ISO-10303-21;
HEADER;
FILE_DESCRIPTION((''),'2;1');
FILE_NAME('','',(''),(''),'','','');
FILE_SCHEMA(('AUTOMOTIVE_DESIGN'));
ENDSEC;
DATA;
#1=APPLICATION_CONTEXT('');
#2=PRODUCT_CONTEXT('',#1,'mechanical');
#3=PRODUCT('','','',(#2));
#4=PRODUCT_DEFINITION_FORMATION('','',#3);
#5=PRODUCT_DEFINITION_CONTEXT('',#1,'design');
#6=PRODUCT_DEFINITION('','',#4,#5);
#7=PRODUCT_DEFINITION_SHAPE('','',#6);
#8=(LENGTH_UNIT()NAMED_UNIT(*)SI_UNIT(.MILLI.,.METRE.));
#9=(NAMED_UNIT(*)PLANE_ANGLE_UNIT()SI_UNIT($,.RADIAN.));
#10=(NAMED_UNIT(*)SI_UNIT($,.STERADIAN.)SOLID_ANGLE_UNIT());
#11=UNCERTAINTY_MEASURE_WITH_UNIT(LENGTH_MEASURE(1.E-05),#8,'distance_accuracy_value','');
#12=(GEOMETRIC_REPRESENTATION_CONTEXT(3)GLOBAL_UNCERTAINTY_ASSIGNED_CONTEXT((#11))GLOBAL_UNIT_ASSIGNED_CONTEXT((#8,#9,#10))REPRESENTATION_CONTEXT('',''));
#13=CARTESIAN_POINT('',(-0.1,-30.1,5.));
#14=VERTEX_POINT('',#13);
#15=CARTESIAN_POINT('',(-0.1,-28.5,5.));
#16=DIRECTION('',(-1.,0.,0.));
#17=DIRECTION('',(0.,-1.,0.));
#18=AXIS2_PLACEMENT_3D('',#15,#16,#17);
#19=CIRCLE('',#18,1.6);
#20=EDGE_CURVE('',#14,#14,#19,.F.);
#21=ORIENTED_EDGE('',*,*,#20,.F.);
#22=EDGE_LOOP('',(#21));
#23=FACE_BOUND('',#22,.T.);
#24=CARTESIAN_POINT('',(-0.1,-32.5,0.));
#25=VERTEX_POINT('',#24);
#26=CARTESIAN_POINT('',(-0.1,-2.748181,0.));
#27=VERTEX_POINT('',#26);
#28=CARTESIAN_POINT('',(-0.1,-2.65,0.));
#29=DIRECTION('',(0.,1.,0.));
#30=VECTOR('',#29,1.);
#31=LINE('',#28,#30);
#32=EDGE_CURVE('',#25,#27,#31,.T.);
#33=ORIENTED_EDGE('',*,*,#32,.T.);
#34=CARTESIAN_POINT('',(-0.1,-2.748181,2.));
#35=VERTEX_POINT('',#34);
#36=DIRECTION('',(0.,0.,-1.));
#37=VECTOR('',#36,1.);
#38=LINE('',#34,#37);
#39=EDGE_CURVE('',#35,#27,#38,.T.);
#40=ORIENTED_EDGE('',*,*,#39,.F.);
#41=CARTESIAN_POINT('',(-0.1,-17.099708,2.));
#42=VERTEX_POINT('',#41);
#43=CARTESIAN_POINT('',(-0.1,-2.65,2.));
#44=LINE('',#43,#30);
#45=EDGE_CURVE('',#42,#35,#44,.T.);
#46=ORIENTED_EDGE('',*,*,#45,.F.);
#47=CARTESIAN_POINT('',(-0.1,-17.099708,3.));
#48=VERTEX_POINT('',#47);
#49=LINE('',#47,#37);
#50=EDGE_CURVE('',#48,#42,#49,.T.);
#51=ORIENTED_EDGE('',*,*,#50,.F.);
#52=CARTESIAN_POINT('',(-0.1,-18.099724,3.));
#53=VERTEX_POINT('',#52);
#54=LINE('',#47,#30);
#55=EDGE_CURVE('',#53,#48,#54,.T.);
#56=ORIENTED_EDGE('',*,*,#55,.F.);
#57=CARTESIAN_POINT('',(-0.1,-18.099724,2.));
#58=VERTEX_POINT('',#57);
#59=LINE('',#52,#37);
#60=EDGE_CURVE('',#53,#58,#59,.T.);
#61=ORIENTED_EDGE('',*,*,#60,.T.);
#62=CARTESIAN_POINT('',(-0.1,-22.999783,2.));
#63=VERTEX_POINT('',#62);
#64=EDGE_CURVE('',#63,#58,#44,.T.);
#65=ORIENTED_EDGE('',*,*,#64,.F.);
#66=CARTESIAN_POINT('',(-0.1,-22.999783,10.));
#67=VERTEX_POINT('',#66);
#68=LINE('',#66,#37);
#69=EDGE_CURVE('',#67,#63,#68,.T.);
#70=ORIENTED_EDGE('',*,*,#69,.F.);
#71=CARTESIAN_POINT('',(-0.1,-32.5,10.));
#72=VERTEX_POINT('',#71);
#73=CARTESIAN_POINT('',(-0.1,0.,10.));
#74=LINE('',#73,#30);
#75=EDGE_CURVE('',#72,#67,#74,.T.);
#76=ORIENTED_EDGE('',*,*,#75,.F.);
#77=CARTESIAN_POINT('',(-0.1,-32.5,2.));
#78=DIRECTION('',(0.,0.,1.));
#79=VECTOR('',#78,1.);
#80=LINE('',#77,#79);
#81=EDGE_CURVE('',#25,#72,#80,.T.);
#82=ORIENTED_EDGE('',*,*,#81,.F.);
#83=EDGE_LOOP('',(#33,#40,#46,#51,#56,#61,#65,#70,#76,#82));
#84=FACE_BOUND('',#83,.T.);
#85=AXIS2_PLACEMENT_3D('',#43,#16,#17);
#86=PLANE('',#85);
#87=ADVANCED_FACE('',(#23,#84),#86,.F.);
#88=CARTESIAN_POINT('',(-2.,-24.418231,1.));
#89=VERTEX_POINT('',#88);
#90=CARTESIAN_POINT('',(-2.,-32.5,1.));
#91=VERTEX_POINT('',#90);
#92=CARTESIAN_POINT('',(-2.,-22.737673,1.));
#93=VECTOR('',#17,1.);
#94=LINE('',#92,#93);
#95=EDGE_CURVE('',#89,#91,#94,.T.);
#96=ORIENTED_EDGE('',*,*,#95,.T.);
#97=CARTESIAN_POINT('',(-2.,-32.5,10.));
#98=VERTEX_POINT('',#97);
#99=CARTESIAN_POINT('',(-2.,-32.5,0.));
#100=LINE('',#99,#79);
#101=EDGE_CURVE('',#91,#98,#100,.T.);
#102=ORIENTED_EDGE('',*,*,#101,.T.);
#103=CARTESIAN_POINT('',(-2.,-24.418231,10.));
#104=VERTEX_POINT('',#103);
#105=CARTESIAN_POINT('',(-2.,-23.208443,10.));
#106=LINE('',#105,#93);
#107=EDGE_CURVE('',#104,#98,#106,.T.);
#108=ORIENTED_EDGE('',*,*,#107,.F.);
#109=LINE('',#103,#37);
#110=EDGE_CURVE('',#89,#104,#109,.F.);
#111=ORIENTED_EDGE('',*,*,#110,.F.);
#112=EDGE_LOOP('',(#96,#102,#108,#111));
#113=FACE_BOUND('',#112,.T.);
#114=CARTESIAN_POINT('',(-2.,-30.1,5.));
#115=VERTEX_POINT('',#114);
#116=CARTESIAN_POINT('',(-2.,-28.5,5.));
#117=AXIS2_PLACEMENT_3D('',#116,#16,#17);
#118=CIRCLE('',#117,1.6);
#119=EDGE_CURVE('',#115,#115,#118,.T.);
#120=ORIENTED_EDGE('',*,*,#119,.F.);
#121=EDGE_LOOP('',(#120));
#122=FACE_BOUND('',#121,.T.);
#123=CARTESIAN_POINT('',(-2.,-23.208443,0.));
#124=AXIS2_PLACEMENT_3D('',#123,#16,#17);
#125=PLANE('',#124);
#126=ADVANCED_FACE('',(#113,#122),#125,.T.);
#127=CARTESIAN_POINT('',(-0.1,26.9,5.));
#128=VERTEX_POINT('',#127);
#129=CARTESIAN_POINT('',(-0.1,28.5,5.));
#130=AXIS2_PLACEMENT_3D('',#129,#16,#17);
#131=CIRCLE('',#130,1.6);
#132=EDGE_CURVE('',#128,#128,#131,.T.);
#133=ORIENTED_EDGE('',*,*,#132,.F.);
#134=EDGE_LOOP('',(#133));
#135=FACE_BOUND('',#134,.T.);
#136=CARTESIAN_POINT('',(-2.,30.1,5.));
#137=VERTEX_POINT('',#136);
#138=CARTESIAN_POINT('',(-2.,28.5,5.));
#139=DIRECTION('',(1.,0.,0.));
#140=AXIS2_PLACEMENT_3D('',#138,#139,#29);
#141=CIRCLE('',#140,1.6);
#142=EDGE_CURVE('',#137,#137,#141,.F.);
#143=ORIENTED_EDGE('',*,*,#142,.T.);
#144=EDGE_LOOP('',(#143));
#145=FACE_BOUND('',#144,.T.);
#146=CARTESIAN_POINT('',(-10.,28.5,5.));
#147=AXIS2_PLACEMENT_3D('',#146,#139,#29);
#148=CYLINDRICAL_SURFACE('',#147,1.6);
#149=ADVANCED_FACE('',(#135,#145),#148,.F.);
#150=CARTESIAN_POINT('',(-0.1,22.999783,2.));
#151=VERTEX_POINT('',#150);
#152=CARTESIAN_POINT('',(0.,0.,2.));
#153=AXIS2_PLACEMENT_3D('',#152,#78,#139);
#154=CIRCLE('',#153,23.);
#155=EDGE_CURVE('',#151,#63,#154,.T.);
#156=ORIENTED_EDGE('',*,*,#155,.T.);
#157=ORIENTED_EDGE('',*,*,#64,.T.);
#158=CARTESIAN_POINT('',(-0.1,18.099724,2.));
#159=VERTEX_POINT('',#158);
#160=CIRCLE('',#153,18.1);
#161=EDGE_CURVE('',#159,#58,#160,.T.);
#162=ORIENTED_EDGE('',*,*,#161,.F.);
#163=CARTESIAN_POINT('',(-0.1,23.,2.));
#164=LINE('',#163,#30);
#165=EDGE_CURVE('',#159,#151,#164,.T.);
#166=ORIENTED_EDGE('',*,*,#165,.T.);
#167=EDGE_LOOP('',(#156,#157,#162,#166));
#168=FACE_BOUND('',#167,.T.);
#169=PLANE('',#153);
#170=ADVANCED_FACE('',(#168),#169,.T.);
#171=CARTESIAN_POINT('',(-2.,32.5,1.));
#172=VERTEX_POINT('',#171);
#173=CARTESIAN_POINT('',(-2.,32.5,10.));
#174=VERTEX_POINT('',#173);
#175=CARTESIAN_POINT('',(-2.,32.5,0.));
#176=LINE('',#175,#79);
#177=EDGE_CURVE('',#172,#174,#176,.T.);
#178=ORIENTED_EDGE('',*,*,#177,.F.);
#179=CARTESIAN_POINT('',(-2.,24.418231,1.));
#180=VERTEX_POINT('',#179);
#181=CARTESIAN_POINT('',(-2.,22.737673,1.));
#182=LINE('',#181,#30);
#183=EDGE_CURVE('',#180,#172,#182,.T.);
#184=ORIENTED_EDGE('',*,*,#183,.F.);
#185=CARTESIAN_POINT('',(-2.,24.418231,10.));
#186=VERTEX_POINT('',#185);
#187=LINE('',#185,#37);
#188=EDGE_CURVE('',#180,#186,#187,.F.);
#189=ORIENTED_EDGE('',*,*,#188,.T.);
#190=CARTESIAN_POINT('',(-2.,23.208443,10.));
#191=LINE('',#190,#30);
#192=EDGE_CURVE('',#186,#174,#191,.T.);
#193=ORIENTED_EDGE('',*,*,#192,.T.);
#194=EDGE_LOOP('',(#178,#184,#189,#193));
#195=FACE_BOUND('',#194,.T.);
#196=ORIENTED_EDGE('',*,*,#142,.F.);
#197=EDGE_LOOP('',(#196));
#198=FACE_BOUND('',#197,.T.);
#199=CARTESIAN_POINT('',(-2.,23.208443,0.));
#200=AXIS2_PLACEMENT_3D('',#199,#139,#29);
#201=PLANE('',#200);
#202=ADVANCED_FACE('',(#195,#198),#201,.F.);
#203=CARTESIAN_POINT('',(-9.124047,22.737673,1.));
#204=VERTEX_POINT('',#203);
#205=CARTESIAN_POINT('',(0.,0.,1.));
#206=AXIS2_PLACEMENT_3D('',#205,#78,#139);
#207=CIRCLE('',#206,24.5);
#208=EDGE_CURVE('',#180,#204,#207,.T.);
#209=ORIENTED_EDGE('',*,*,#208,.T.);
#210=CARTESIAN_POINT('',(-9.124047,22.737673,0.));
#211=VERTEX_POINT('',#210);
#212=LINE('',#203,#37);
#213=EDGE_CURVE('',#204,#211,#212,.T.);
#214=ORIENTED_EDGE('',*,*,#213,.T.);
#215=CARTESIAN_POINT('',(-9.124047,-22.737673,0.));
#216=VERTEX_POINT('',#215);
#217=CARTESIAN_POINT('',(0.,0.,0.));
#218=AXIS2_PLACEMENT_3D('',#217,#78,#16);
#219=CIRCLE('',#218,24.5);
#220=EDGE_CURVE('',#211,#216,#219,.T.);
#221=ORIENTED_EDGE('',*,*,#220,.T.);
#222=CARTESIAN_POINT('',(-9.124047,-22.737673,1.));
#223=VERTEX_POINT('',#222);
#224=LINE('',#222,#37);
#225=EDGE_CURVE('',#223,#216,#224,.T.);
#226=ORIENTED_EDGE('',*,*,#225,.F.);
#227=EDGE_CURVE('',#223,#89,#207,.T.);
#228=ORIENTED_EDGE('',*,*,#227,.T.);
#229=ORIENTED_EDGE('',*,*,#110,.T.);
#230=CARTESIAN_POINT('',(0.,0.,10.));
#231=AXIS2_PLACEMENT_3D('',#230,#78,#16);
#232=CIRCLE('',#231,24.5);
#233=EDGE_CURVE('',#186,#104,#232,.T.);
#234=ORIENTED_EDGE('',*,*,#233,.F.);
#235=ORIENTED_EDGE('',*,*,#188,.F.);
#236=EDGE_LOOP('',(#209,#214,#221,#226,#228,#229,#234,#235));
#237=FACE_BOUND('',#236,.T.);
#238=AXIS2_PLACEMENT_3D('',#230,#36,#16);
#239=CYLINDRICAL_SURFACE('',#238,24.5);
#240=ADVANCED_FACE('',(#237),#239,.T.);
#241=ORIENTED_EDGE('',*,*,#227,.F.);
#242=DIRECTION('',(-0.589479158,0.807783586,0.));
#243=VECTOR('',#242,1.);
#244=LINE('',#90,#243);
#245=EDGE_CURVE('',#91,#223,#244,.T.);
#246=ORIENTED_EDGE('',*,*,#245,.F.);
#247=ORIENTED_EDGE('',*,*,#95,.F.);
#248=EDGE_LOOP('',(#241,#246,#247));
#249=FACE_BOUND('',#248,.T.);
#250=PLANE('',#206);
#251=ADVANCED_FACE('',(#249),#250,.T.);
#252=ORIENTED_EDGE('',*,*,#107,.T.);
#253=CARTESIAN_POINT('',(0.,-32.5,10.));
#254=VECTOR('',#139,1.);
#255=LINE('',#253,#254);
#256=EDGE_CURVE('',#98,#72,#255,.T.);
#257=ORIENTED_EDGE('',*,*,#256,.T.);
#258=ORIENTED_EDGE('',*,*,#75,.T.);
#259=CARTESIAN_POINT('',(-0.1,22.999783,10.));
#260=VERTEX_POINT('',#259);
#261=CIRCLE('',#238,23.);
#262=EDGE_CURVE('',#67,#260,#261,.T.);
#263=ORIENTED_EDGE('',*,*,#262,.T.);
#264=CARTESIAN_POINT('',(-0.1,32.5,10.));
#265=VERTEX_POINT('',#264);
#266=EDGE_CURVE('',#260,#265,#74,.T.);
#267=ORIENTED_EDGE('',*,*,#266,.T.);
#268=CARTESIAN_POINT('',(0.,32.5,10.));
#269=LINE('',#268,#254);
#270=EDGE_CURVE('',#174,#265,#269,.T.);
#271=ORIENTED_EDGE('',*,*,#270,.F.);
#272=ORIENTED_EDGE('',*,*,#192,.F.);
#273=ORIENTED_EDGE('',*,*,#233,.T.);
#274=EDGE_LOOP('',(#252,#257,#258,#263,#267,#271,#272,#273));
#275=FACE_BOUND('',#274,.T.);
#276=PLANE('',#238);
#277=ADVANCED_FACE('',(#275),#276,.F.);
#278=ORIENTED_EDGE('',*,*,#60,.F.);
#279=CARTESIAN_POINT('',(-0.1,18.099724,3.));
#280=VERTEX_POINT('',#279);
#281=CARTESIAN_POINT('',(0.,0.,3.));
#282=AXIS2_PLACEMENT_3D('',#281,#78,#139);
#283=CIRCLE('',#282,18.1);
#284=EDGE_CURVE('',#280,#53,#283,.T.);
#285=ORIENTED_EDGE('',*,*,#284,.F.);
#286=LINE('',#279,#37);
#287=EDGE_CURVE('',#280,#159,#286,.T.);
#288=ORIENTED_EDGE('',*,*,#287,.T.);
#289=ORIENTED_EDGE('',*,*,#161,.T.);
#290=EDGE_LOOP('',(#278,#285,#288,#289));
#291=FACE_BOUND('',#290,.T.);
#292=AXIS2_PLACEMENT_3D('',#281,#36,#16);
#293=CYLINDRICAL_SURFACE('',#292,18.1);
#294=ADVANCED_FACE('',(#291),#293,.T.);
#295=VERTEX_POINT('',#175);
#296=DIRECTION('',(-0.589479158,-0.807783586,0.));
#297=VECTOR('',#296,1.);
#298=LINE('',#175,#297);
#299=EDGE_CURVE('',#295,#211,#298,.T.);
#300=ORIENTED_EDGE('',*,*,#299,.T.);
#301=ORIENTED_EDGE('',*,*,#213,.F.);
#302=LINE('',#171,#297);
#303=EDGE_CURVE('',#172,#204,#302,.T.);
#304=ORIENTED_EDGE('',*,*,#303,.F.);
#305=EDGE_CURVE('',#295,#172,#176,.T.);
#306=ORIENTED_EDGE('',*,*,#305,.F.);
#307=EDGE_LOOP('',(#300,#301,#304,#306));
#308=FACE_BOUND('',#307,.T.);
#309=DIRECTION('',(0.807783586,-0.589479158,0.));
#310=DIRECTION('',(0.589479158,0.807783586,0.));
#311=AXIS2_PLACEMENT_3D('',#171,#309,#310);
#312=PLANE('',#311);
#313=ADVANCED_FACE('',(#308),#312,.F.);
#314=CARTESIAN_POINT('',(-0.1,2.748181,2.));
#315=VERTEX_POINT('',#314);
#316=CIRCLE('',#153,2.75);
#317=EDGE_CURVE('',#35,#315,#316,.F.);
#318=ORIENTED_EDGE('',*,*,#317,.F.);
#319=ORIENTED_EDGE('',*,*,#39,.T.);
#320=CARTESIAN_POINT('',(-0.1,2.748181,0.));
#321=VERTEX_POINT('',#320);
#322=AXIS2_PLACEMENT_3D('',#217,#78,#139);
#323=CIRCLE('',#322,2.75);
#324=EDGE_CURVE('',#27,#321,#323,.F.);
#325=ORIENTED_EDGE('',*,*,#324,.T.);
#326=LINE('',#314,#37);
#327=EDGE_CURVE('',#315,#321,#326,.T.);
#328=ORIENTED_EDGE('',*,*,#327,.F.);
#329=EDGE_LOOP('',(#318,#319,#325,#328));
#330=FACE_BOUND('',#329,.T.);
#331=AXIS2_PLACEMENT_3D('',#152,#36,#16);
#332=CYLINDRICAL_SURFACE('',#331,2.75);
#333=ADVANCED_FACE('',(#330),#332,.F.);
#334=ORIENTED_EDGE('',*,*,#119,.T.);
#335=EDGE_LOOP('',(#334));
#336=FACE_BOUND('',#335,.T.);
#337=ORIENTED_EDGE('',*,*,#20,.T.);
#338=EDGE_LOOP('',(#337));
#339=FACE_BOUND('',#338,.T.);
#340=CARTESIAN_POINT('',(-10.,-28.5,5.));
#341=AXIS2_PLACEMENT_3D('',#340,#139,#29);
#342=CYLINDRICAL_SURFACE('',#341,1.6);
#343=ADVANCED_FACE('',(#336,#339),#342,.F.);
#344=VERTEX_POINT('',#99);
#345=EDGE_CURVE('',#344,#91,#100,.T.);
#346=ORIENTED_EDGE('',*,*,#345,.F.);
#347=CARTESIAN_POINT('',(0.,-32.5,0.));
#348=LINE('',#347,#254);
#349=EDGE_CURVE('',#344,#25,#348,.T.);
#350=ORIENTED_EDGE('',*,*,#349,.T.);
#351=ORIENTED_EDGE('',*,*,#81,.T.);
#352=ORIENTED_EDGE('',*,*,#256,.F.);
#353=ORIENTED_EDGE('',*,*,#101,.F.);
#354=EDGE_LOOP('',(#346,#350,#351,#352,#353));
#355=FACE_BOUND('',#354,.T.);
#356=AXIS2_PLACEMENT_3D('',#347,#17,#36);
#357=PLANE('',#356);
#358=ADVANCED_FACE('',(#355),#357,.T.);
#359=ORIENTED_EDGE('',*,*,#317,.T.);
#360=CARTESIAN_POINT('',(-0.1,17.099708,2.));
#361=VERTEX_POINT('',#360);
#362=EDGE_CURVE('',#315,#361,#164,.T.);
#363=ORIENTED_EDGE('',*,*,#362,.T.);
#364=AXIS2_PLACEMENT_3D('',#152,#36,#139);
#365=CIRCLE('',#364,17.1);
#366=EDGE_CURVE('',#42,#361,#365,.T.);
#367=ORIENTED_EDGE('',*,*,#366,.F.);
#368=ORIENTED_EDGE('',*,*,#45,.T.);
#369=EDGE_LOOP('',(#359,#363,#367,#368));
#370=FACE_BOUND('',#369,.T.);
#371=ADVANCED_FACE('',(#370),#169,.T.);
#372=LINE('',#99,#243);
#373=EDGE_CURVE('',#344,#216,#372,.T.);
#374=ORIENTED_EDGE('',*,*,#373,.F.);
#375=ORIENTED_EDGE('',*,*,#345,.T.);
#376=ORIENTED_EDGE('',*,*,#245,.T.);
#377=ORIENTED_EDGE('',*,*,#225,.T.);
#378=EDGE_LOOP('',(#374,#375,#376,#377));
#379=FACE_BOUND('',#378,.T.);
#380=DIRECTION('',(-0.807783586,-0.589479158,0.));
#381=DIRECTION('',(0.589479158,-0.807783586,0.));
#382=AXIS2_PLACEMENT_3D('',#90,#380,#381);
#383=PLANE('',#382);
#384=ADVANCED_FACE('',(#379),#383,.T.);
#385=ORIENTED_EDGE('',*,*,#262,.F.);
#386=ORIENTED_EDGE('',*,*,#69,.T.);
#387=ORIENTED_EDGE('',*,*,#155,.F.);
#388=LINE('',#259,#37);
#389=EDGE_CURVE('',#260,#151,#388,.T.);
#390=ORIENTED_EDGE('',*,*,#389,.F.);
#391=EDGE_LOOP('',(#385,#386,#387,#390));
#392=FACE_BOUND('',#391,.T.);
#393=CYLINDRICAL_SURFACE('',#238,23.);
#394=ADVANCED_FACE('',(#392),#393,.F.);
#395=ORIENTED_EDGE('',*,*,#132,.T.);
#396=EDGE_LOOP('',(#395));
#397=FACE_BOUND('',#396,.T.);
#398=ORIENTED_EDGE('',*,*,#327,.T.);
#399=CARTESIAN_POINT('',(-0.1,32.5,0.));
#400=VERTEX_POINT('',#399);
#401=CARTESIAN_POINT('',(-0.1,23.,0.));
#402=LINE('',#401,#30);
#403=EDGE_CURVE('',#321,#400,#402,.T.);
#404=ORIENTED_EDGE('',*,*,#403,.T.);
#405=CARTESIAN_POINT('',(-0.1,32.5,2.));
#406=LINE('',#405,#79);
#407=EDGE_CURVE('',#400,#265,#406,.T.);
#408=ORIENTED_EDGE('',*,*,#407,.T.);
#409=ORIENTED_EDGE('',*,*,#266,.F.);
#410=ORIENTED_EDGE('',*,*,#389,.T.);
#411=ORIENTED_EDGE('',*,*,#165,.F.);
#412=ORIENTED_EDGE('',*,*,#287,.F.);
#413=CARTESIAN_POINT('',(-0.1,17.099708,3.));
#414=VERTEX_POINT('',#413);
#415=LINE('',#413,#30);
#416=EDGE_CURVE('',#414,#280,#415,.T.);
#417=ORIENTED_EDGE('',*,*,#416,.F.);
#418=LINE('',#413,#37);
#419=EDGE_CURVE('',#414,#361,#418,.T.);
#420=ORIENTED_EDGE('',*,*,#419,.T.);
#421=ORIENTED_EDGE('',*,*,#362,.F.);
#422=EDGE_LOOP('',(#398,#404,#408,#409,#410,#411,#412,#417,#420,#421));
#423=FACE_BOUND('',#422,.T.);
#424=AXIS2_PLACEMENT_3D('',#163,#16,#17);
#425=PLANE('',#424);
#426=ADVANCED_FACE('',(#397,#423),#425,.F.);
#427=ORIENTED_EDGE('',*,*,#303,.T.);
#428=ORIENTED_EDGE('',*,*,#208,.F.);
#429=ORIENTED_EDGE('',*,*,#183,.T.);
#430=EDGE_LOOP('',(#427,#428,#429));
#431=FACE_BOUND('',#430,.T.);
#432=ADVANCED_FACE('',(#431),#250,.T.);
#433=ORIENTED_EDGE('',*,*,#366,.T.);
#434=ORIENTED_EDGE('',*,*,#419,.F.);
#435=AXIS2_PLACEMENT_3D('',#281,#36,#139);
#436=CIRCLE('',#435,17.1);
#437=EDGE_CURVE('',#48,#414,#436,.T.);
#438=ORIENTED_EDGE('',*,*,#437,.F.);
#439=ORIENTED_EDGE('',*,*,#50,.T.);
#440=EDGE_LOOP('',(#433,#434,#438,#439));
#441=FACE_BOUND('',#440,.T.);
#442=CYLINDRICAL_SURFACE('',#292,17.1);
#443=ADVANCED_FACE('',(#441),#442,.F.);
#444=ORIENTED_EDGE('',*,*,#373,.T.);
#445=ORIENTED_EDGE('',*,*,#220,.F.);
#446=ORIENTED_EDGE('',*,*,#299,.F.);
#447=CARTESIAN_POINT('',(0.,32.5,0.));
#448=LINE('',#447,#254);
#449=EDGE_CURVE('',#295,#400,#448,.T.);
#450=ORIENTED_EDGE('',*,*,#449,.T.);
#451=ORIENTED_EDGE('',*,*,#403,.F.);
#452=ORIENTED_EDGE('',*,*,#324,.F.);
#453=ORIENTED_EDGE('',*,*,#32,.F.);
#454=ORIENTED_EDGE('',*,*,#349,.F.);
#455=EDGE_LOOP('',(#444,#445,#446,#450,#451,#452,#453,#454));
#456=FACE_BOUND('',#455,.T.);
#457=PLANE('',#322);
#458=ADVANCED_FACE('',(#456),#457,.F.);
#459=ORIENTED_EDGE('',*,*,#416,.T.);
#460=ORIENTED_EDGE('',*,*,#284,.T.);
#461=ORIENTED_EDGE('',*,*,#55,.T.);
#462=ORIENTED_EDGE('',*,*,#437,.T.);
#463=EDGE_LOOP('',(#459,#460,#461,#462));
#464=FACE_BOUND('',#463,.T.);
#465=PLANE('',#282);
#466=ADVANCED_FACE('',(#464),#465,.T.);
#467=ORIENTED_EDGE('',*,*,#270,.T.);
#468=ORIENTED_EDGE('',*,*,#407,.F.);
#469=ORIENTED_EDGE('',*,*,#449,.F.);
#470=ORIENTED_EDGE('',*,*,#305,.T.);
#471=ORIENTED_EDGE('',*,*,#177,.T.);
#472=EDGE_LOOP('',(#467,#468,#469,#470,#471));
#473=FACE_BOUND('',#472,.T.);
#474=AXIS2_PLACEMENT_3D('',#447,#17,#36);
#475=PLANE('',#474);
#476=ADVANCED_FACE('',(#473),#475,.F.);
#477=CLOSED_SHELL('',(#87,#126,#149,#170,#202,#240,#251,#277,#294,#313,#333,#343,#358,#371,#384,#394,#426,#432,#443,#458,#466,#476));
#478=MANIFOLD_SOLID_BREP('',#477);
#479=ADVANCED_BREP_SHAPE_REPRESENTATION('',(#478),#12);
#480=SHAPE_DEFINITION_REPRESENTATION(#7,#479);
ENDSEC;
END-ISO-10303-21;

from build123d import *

# Parameters (mm, degrees)
BOSS_EXTRUDE1_DEPTH = 2
BOSS_EXTRUDE2_DEPTH = 10
BOSS_EXTRUDE3_DEPTH = 10
SKETCH3_R           = 1.6
CUT_EXTRUDE1_DEPTH  = 10
BOSS_EXTRUDE4_DEPTH = 1
MOVE_FACE1_DEPTH    = 10
BOSS_EXTRUDE5_DEPTH = 1


# Read off the part's stored shape, not the designer's step: Move Face1
with BuildPart() as part:
    # Sketch1 → Boss-Extrude1 (new body)
    with BuildSketch(Plane.XY):
        with BuildLine():
            Line((0, 23), (0, 2.65))
            ThreePointArc((0, 2.65), (-2.65, 0), (0, -2.65))
            Line((0, -2.65), (0, -23))
            ThreePointArc((0, -23), (-23, 0), (0, 23))
        make_face()
    extrude(amount=BOSS_EXTRUDE1_DEPTH)

    # Sketch2 → Boss-Extrude2 (add)
    with BuildSketch(Plane.XY):
        with BuildLine():
            Line((0, 23), (0, 24.5))
            ThreePointArc((0, 24.5), (-24.5, 0), (0, -24.5))
            Line((0, -24.5), (0, -23))
            ThreePointArc((0, -23), (-23, 0), (0, 23))
        make_face()
    extrude(amount=BOSS_EXTRUDE2_DEPTH)

    # Sketch4 → Boss-Extrude3 (add)
    with BuildSketch(Plane.XY.offset(10)):
        Polygon((0, -24.5), (-0.271688165, -23.208442848), (-2, -23.208442848), (-2, -32.5), (0, -32.5), align=None)
    boss_extrude3 = extrude(amount=-BOSS_EXTRUDE3_DEPTH)

    # Sketch3 → Cut-Extrude1 (cut)
    with BuildSketch(Plane(origin=(0, 0, 0), x_dir=(0, 0, -1), z_dir=(1, 0, 0))):
        with Locations(Location((-5, -28.5, 0), (0, 0, 90))):
            Circle(SKETCH3_R)
    cut_extrude1 = extrude(amount=-CUT_EXTRUDE1_DEPTH, mode=Mode.SUBTRACT)

    # Sketch5 → Boss-Extrude4 (add)
    with BuildSketch(Plane(origin=(0, 0, 0), x_dir=(-1, 0, 0), z_dir=(0, 0, -1))):
        Polygon((2, -32.5), (9.124047282, -22.73767273), (2, -22.73767273), align=None)
    boss_extrude4 = extrude(amount=-BOSS_EXTRUDE4_DEPTH)

    # Mirror1: Boss-Extrude3, Cut-Extrude1, Boss-Extrude4 across plane
    add(boss_extrude3.mirror(Plane.ZX))
    add(cut_extrude1.mirror(Plane.ZX), mode=Mode.SUBTRACT)
    add(boss_extrude4.mirror(Plane.ZX))

    # Move Face1 outline → Move Face1 (cut)
    with BuildSketch(Plane.XY):
        with BuildLine():
            ThreePointArc((-0.1, 2.748181217), (-2.75, 0), (-0.1, -2.748181217))
            Line((-0.1, -2.748181217), (-0.1, -32.5))
            Line((-0.1, -32.5), (0, -32.5))
            Line((0, -32.5), (0, -2.65))
            ThreePointArc((0, -2.65), (-2.65, 0), (0, 2.65))
            Line((0, 2.65), (0, 32.5))
            Line((0, 32.5), (-0.1, 32.5))
            Line((-0.1, 32.5), (-0.1, 2.748181217))
        make_face()
    extrude(amount=MOVE_FACE1_DEPTH, mode=Mode.SUBTRACT)

    # Sketch6 → Boss-Extrude5 (add)
    with BuildSketch(Plane.XY.offset(2)):
        with BuildLine():
            Line((-0.1, 17.0997076), (-0.1, 18.099723755))
            ThreePointArc((-0.1, 18.099723755), (-18.1, 0), (-0.1, -18.099723755))
            Line((-0.1, -18.099723755), (-0.1, -17.0997076))
            ThreePointArc((-0.1, -17.0997076), (-17.1, 0), (-0.1, 17.0997076))
        make_face()
    extrude(amount=BOSS_EXTRUDE5_DEPTH)


solid = part.part
